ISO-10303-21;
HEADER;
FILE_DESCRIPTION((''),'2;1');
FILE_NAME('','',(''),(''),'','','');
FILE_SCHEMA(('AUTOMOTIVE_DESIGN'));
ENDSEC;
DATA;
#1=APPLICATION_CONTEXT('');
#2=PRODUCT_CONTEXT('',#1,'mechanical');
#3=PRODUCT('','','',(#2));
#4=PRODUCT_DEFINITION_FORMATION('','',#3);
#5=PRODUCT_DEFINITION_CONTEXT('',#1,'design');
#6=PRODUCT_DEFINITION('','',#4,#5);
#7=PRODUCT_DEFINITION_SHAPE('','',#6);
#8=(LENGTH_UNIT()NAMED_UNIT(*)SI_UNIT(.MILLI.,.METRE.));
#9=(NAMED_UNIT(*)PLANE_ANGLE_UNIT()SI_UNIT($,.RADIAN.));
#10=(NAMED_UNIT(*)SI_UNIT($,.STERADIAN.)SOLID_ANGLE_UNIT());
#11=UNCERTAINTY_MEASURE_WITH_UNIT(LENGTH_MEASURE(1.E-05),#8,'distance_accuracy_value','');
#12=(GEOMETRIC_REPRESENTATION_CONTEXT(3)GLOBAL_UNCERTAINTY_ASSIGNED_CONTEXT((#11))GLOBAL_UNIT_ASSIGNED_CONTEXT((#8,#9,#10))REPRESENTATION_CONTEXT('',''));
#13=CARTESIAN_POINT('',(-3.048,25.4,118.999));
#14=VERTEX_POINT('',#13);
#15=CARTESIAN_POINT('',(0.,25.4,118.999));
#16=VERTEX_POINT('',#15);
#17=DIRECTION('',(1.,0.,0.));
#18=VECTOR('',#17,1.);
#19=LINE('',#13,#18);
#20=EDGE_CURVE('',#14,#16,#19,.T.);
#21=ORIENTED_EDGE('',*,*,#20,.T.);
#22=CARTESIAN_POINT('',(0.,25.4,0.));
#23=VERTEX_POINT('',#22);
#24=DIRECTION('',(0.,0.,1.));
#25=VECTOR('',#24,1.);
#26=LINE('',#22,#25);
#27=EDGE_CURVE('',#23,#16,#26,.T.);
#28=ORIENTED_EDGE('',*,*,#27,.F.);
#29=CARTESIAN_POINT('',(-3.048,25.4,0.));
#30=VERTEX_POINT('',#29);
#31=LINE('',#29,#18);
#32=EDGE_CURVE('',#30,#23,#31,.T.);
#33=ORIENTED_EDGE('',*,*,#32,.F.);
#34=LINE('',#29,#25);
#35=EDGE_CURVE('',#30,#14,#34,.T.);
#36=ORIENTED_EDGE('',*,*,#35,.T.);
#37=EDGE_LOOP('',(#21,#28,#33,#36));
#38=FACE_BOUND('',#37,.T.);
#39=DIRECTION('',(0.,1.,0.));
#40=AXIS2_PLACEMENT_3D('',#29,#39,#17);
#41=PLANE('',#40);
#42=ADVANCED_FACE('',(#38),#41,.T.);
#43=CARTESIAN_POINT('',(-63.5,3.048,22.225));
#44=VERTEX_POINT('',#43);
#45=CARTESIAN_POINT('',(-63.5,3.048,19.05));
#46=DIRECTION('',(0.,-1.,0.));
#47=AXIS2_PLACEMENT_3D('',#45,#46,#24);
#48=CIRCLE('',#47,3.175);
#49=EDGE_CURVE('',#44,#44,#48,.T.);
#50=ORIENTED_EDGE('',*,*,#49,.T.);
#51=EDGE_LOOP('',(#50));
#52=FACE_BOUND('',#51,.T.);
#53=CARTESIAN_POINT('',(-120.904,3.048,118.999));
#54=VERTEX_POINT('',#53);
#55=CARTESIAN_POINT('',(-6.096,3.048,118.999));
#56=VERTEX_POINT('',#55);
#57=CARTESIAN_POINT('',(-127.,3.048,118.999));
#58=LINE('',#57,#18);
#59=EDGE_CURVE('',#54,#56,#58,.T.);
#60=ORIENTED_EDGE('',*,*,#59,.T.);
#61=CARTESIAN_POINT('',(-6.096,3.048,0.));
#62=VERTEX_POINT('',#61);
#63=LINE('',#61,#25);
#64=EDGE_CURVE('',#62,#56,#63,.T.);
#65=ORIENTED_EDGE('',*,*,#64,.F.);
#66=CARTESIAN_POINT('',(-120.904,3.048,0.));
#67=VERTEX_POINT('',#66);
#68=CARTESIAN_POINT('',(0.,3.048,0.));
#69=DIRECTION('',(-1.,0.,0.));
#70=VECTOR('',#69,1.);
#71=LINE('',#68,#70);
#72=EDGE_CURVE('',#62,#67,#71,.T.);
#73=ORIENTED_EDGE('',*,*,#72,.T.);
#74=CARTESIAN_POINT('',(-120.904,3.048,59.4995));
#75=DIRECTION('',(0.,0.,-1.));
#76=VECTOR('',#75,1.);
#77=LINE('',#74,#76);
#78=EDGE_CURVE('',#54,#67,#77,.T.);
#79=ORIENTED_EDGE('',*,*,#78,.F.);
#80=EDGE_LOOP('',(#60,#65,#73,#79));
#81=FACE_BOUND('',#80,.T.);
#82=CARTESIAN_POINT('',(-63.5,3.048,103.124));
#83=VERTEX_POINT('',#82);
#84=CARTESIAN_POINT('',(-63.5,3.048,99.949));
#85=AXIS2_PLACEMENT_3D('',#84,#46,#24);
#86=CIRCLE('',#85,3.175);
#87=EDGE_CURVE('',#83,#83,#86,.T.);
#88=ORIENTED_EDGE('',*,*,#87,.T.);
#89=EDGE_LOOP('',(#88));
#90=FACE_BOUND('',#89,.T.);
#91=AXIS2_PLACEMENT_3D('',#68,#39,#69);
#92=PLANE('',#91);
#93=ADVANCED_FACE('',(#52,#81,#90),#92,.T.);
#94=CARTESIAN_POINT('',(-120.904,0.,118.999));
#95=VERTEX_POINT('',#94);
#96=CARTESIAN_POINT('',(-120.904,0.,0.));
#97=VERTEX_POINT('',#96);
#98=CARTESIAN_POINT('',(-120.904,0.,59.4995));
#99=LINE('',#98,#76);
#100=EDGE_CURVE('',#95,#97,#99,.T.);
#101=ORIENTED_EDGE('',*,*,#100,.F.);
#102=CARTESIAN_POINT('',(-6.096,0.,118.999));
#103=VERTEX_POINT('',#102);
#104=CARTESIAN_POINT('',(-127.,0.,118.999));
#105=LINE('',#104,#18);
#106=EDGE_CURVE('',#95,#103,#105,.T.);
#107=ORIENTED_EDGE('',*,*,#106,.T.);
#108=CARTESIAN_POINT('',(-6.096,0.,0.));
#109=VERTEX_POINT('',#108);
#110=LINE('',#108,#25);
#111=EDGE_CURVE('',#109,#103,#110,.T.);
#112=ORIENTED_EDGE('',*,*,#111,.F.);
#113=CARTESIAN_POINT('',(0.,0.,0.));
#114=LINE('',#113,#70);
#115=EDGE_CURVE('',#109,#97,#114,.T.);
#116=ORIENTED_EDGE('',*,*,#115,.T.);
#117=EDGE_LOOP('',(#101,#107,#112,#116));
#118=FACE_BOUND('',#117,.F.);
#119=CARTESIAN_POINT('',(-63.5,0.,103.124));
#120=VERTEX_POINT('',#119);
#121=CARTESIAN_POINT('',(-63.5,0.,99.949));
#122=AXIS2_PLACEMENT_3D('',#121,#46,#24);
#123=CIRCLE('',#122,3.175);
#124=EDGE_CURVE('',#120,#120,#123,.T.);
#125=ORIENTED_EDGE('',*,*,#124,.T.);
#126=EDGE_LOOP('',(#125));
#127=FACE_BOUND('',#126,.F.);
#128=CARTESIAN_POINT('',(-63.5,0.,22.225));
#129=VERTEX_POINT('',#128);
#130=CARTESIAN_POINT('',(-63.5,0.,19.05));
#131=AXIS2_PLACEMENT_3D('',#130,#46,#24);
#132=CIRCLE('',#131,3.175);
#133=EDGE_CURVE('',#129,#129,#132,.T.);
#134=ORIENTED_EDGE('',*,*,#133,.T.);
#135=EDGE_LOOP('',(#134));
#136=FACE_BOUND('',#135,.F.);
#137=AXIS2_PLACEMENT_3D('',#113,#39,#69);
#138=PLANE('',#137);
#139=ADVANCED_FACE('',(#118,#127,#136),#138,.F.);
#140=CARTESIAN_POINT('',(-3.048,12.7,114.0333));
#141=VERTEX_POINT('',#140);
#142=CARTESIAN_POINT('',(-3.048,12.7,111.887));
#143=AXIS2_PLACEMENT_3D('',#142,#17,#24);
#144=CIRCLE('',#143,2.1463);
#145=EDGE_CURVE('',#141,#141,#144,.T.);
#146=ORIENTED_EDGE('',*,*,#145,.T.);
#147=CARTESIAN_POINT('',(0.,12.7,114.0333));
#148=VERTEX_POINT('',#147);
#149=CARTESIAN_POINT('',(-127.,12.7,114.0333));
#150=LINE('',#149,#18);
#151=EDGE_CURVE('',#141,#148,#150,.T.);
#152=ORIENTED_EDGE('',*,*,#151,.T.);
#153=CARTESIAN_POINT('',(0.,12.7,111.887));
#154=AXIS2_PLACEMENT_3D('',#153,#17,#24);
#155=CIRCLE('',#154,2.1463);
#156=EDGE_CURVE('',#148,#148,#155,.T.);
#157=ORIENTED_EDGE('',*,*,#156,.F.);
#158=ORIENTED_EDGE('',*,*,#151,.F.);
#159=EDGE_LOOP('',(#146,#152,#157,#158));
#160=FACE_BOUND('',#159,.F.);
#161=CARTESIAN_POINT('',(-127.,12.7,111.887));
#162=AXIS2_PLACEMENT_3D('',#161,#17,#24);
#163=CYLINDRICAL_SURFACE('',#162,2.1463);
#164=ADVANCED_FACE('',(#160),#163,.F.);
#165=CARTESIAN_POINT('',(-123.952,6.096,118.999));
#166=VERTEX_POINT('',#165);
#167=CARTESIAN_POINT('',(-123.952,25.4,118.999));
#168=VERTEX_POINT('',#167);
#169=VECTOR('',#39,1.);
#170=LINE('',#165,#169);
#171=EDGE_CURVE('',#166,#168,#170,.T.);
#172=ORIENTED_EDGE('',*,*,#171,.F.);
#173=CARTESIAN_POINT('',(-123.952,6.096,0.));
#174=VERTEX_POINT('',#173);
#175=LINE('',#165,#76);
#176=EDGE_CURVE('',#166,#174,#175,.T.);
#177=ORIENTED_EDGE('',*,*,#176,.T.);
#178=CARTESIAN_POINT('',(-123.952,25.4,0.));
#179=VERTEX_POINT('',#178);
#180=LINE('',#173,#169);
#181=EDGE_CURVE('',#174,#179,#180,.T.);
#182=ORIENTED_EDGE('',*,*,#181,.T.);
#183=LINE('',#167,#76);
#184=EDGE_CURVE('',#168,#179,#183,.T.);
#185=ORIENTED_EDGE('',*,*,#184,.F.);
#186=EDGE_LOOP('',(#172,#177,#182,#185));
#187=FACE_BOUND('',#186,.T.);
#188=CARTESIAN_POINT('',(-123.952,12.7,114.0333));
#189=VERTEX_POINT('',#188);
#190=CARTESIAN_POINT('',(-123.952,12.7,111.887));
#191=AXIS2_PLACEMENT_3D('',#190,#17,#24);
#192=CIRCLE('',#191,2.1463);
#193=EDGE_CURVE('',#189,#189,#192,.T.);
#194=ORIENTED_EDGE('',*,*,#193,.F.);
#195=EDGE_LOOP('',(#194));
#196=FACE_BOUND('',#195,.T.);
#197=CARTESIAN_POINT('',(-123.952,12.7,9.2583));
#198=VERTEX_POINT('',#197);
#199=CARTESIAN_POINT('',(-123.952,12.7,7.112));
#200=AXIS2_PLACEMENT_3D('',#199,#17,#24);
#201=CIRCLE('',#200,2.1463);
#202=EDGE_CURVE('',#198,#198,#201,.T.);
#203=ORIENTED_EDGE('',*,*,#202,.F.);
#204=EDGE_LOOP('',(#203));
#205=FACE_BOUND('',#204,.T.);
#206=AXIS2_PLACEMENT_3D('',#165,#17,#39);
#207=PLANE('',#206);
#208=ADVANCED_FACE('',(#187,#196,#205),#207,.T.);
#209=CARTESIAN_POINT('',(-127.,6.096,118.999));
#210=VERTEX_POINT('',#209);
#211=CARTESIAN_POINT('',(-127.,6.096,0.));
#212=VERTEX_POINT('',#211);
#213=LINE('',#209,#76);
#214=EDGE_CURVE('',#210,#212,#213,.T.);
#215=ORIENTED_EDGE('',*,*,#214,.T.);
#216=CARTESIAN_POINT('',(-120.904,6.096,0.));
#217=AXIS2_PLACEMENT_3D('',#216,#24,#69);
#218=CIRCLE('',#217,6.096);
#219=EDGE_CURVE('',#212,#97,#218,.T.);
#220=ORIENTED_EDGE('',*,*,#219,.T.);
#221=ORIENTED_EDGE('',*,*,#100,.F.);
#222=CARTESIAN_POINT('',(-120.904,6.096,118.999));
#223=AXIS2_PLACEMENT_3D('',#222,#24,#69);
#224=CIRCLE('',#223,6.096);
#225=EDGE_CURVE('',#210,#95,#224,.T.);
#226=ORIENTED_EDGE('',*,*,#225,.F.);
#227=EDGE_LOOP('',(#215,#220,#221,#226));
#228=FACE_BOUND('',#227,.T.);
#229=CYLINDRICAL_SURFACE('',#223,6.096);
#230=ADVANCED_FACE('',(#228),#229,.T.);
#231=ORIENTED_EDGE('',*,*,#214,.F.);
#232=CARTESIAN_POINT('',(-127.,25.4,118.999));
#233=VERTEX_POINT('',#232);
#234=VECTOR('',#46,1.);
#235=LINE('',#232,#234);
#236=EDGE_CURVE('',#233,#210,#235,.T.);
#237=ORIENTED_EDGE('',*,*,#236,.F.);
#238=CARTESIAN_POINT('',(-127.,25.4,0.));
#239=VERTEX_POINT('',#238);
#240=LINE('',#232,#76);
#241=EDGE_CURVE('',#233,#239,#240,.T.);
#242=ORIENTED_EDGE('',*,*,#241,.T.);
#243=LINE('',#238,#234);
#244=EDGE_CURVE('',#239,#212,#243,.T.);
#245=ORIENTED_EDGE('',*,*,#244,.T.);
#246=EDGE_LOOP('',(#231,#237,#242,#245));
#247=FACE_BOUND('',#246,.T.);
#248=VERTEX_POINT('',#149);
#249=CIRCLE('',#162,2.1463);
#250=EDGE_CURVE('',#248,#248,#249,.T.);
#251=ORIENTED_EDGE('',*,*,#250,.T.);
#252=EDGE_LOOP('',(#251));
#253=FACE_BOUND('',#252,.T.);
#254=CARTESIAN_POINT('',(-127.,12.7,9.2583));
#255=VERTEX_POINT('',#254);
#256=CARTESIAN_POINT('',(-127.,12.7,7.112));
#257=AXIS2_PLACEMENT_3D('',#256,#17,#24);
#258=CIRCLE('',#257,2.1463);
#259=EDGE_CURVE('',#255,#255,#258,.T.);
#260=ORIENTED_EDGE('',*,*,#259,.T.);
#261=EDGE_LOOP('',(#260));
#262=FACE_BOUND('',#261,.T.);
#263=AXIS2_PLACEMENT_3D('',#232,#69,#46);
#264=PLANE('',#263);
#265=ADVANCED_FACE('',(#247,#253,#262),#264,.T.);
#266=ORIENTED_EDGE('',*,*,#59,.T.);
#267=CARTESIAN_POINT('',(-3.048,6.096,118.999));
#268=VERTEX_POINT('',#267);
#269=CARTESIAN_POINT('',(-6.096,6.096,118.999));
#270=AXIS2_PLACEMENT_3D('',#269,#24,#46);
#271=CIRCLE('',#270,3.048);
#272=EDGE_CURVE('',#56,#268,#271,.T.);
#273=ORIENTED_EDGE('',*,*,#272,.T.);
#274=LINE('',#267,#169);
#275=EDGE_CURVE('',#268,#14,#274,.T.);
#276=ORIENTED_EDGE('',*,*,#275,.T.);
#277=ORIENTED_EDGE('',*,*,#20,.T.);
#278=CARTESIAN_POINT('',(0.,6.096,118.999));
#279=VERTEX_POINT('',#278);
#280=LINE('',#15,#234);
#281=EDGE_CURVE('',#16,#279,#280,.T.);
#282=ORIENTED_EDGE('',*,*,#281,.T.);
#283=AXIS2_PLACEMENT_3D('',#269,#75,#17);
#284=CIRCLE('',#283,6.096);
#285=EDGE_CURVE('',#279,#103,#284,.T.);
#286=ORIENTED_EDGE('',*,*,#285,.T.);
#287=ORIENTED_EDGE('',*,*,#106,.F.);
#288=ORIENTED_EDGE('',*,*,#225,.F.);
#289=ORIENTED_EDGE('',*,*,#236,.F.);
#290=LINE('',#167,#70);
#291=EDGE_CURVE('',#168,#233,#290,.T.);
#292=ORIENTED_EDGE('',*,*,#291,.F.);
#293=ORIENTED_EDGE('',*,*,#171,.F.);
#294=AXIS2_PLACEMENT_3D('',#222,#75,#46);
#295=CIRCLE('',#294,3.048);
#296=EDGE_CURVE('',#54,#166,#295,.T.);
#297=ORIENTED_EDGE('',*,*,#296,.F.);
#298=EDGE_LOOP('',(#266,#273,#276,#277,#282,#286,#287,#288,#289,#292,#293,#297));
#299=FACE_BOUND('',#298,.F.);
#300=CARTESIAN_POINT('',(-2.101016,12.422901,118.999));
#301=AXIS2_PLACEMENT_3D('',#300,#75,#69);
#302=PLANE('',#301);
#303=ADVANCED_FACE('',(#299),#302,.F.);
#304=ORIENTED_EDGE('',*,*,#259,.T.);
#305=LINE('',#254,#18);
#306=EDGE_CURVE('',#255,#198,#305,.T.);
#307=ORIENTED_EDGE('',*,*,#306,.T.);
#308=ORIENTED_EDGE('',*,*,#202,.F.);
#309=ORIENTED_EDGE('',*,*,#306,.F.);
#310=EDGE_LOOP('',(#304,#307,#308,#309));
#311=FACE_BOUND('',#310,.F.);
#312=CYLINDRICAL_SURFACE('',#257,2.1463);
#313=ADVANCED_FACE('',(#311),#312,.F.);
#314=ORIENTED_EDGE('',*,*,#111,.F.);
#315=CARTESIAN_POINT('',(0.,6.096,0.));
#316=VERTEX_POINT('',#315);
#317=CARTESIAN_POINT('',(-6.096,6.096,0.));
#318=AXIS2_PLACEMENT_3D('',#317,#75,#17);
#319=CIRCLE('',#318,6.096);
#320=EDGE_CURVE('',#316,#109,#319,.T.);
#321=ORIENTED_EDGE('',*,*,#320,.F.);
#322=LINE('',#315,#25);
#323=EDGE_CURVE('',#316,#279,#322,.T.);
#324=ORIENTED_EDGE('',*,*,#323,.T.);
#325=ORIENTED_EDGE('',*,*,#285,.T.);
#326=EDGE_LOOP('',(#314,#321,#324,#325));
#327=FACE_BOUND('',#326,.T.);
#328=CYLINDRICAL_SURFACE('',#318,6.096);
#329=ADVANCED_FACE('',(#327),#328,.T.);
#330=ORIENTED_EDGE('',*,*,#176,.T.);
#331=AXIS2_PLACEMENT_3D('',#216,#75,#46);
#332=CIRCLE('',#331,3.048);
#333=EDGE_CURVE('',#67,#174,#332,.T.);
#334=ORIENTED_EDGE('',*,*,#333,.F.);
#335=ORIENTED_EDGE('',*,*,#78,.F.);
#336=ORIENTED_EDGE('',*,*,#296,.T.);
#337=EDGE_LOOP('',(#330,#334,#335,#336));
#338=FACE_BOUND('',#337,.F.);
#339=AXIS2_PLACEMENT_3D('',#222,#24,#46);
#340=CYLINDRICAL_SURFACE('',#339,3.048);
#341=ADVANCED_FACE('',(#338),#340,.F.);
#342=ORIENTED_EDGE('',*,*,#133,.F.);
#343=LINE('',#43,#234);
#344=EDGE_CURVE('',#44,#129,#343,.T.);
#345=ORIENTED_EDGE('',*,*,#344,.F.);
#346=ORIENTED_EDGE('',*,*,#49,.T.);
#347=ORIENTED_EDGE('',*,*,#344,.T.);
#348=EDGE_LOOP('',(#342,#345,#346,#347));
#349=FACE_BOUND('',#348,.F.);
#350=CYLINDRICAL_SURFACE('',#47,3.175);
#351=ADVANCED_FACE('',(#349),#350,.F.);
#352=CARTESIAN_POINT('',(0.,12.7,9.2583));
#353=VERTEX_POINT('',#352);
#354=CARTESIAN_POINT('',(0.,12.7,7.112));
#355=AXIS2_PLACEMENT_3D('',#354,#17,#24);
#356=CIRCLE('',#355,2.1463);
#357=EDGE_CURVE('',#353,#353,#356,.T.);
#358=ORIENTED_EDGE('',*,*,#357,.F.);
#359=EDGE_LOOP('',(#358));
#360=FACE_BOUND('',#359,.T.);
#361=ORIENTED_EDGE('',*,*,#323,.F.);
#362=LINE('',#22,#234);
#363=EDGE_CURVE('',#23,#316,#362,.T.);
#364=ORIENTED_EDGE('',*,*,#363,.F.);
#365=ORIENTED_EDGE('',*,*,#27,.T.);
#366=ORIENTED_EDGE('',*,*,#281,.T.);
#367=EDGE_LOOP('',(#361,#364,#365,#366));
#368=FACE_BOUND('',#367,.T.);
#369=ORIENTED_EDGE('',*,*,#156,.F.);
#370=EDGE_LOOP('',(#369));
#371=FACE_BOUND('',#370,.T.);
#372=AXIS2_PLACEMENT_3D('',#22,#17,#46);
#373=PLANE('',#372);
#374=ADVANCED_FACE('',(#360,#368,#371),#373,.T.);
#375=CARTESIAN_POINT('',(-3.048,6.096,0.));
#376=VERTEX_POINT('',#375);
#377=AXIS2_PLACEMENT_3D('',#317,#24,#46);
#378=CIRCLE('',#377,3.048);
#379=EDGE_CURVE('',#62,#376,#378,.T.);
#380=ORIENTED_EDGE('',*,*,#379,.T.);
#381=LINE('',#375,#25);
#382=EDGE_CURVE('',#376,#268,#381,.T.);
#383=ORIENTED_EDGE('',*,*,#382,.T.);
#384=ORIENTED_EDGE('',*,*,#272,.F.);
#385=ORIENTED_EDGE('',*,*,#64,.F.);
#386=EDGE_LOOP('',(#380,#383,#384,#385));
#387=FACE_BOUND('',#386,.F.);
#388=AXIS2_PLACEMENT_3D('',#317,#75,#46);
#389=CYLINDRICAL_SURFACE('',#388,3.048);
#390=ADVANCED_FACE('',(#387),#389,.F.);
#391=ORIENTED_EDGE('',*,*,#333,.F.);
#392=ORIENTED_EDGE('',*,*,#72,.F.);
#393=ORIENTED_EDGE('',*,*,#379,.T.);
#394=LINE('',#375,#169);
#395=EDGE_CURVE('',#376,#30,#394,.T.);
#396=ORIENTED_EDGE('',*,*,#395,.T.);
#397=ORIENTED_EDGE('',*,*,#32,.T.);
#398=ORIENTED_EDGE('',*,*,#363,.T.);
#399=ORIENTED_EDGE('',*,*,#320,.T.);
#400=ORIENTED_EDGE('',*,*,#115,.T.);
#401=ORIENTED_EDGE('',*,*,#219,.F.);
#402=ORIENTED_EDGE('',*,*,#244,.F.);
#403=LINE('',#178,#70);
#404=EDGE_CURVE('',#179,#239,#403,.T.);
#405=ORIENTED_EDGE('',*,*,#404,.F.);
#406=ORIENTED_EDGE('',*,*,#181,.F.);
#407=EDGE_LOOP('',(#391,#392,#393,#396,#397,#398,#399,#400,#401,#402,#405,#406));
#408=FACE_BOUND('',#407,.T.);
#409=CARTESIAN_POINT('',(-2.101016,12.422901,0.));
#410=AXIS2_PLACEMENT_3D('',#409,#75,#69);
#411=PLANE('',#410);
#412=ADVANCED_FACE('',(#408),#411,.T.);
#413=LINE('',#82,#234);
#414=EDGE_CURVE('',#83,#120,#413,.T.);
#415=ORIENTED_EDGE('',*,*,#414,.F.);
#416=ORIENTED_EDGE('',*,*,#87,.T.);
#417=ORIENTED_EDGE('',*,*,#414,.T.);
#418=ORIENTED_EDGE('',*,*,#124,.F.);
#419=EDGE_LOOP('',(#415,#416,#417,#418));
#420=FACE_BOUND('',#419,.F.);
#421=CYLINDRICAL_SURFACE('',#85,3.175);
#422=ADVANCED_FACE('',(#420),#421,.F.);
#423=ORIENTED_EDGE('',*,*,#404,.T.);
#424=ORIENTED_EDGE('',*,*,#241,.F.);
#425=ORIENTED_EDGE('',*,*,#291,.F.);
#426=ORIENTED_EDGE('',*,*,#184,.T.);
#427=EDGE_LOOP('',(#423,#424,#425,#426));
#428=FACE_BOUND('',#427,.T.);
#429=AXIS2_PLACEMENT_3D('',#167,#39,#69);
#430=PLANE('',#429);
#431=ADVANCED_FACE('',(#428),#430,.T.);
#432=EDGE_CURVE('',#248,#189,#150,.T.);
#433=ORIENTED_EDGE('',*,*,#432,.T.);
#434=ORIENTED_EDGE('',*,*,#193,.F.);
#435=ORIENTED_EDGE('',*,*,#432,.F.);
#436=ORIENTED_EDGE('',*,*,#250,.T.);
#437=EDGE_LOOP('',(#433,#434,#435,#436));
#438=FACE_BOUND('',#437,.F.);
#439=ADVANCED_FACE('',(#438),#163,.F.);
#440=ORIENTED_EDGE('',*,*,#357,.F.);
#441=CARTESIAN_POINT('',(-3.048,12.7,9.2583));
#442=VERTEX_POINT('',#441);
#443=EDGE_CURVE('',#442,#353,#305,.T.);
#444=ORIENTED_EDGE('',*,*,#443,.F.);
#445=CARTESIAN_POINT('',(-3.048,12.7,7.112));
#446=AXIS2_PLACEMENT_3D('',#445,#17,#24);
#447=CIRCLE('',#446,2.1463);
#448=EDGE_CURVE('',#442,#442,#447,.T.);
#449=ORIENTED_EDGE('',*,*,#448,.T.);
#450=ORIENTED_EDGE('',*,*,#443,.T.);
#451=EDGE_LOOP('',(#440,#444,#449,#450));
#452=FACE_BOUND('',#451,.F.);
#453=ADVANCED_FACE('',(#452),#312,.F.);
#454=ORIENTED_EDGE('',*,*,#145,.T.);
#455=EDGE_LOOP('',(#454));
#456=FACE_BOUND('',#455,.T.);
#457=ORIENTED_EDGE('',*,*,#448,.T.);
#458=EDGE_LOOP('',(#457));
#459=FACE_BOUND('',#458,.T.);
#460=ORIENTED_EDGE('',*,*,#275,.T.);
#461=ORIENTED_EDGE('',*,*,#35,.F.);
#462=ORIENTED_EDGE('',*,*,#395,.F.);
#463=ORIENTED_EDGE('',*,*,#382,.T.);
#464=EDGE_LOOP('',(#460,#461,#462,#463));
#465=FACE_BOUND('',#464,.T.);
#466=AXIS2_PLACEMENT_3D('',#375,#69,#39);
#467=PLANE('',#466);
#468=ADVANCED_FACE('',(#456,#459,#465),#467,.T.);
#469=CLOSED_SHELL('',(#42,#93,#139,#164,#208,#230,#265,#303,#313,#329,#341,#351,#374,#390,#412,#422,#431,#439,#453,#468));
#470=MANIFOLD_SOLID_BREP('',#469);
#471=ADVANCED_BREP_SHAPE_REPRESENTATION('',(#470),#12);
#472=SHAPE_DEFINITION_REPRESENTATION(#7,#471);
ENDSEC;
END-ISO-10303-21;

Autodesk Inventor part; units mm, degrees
ref_plane "YZ Plane" through (0, 0, 0) normal (1, 0, 0) x (0, 1, 0)
ref_plane "XZ Plane" through (0, 0, 0) normal (0, 1, 0) x (-1, 0, 0)
ref_plane "XY Plane" through (0, 0, 0) normal (0, 0, 1) x (1, 0, 0)
sketch "Sketch1" plane through (0, 0, 0) normal (0, 1, 0) x (-1, 0, 0)
  line L0 (0, 0) -> (127, 0)
  line L1 (127, 0) -> (127, 118.999)
  line L2 (127, 118.999) -> (0, 118.999)
  line L3 (0, 118.999) -> (0, 0)
  dimension "d0" = 127
  dimension "d1" = 118.999
extrude "Plate1" add sketch "Sketch1" along normal blind 3.048
sketch "Sketch2" plane through (-123.952, 0, 118.999) normal (-1, 0, 0) x (0, -1, 0)
  line L0 (0, -118.999) -> (0, 0)
  line L1 (0, 0) -> (-25.4, 0)
  line L2 (-25.4, 0) -> (-25.4, -118.999)
  line L3 (-25.4, -118.999) -> (0, -118.999)
edge flange "Flange1" height 25.4 angle 90 thickness 3.048 bend radius 3.048 thickness toward (-1, 0, 0) relief tear relief width 3.048 relief depth 1.524 edges at (-127, 3.048, 59.4995) wall of the first edge with corners at (-123.952, 0, 0) (-123.952, 0, 118.999) (-123.952, 25.4, 118.999) (-123.952, 25.4, 0)
bend "Bend1"
corner "Corner1"
sketch "Sketch3" plane through (-3.048, 0, 0) normal (1, 0, 0) x (0, 1, 0)
  line L0 (0, 118.999) -> (0, 0)
  line L1 (0, 0) -> (25.4, 0)
  line L2 (25.4, 0) -> (25.4, 118.999)
  line L3 (25.4, 118.999) -> (0, 118.999)
edge flange "Flange2" height 25.4 angle 90 thickness 3.048 bend radius 3.048 thickness toward (1, 0, 0) relief tear relief width 3.048 relief depth 1.524 edges at (0, 3.048, 59.4995) wall of the first edge with corners at (-3.048, 0, 118.999) (-3.048, 0, 0) (-3.048, 25.4, 0) (-3.048, 25.4, 118.999)
bend "Bend2"
corner "Corner2"
sketch "Sketch4" plane through (0, 3.048, 0) normal (0, 1, 0) x (1, 0, 0)
  line L0 (-120.904, 0) -> (-6.096, 0) projected
  line L1 (-6.096, -118.999) -> (-120.904, -118.999) projected
  point P0 (0, 0)
  point P1 (-63.5, -99.949)
  point P2 (-63.5, -19.05)
  dimension "d23" = 19.05
  dimension "d24" = 19.05
hole "Hole1" at (-63.5, 3.048, 99.949) at (-63.5, 3.048, 19.05) direction (0, -1, 0) diameter 6.35 end through all
sketch "Sketch5" plane through (-127, 25.4, 0) normal (-1, 0, 0) x (0, 0, 1)
  line L0 (118.999, 0) -> (118.999, -19.304) projected
  line L1 (0, -19.304) -> (0, 0) projected
  line L2 (118.999, -25.4) -> (0, -25.4) projected
  point P0 (7.112, -12.7)
  point P1 (111.887, -12.7)
  dimension "d32" = 7.112
  dimension "d33" = 7.112
  dimension "d34" = 12.7
  dimension "d35" = 12.7
hole "Hole2" at (-127, 12.7, 7.112) at (-127, 12.7, 111.887) direction (1, 0, 0) diameter 4.2926 depth 1016 tip angle 118
equation "\"d30\" = Thickness"
equation "\"d3\" = BendReliefWidth"
equation "\"d4\" = BendReliefDepth"
equation "\"d5\" = MinimumRemnant"
equation "\"d6\" = BendRadius"
equation "\"d9\" = BendRadius"
equation "\"d10\" = CornerReliefSize"
equation "\"d11\" = GapSize"
equation "\"d12\" = JacobiRadiusSize"
equation "\"d13\" = BendReliefWidth"
equation "\"d14\" = BendReliefDepth"
equation "\"d15\" = MinimumRemnant"
equation "\"d16\" = BendRadius"
equation "\"d19\" = BendRadius"
equation "\"d20\" = CornerReliefSize"
equation "\"d21\" = GapSize"
equation "\"d22\" = JacobiRadiusSize"
equation "\"BendRadius\" = Thickness"
equation "\"BendReliefWidth\" = Thickness"
equation "\"BendReliefDepth\" = 0.5 * Thickness"
equation "\"CornerReliefSize\" = 4 * Thickness"
equation "\"MinimumRemnant\" = 2 * Thickness"
equation "\"TransitionRadius\" = BendRadius"
equation "\"JacobiRadiusSize\" = BendRadius"
equation "\"GapSize\" = Thickness"
equation "\"d2\" = BendRadius"
equation "\"Thickness\" = 3.048"
